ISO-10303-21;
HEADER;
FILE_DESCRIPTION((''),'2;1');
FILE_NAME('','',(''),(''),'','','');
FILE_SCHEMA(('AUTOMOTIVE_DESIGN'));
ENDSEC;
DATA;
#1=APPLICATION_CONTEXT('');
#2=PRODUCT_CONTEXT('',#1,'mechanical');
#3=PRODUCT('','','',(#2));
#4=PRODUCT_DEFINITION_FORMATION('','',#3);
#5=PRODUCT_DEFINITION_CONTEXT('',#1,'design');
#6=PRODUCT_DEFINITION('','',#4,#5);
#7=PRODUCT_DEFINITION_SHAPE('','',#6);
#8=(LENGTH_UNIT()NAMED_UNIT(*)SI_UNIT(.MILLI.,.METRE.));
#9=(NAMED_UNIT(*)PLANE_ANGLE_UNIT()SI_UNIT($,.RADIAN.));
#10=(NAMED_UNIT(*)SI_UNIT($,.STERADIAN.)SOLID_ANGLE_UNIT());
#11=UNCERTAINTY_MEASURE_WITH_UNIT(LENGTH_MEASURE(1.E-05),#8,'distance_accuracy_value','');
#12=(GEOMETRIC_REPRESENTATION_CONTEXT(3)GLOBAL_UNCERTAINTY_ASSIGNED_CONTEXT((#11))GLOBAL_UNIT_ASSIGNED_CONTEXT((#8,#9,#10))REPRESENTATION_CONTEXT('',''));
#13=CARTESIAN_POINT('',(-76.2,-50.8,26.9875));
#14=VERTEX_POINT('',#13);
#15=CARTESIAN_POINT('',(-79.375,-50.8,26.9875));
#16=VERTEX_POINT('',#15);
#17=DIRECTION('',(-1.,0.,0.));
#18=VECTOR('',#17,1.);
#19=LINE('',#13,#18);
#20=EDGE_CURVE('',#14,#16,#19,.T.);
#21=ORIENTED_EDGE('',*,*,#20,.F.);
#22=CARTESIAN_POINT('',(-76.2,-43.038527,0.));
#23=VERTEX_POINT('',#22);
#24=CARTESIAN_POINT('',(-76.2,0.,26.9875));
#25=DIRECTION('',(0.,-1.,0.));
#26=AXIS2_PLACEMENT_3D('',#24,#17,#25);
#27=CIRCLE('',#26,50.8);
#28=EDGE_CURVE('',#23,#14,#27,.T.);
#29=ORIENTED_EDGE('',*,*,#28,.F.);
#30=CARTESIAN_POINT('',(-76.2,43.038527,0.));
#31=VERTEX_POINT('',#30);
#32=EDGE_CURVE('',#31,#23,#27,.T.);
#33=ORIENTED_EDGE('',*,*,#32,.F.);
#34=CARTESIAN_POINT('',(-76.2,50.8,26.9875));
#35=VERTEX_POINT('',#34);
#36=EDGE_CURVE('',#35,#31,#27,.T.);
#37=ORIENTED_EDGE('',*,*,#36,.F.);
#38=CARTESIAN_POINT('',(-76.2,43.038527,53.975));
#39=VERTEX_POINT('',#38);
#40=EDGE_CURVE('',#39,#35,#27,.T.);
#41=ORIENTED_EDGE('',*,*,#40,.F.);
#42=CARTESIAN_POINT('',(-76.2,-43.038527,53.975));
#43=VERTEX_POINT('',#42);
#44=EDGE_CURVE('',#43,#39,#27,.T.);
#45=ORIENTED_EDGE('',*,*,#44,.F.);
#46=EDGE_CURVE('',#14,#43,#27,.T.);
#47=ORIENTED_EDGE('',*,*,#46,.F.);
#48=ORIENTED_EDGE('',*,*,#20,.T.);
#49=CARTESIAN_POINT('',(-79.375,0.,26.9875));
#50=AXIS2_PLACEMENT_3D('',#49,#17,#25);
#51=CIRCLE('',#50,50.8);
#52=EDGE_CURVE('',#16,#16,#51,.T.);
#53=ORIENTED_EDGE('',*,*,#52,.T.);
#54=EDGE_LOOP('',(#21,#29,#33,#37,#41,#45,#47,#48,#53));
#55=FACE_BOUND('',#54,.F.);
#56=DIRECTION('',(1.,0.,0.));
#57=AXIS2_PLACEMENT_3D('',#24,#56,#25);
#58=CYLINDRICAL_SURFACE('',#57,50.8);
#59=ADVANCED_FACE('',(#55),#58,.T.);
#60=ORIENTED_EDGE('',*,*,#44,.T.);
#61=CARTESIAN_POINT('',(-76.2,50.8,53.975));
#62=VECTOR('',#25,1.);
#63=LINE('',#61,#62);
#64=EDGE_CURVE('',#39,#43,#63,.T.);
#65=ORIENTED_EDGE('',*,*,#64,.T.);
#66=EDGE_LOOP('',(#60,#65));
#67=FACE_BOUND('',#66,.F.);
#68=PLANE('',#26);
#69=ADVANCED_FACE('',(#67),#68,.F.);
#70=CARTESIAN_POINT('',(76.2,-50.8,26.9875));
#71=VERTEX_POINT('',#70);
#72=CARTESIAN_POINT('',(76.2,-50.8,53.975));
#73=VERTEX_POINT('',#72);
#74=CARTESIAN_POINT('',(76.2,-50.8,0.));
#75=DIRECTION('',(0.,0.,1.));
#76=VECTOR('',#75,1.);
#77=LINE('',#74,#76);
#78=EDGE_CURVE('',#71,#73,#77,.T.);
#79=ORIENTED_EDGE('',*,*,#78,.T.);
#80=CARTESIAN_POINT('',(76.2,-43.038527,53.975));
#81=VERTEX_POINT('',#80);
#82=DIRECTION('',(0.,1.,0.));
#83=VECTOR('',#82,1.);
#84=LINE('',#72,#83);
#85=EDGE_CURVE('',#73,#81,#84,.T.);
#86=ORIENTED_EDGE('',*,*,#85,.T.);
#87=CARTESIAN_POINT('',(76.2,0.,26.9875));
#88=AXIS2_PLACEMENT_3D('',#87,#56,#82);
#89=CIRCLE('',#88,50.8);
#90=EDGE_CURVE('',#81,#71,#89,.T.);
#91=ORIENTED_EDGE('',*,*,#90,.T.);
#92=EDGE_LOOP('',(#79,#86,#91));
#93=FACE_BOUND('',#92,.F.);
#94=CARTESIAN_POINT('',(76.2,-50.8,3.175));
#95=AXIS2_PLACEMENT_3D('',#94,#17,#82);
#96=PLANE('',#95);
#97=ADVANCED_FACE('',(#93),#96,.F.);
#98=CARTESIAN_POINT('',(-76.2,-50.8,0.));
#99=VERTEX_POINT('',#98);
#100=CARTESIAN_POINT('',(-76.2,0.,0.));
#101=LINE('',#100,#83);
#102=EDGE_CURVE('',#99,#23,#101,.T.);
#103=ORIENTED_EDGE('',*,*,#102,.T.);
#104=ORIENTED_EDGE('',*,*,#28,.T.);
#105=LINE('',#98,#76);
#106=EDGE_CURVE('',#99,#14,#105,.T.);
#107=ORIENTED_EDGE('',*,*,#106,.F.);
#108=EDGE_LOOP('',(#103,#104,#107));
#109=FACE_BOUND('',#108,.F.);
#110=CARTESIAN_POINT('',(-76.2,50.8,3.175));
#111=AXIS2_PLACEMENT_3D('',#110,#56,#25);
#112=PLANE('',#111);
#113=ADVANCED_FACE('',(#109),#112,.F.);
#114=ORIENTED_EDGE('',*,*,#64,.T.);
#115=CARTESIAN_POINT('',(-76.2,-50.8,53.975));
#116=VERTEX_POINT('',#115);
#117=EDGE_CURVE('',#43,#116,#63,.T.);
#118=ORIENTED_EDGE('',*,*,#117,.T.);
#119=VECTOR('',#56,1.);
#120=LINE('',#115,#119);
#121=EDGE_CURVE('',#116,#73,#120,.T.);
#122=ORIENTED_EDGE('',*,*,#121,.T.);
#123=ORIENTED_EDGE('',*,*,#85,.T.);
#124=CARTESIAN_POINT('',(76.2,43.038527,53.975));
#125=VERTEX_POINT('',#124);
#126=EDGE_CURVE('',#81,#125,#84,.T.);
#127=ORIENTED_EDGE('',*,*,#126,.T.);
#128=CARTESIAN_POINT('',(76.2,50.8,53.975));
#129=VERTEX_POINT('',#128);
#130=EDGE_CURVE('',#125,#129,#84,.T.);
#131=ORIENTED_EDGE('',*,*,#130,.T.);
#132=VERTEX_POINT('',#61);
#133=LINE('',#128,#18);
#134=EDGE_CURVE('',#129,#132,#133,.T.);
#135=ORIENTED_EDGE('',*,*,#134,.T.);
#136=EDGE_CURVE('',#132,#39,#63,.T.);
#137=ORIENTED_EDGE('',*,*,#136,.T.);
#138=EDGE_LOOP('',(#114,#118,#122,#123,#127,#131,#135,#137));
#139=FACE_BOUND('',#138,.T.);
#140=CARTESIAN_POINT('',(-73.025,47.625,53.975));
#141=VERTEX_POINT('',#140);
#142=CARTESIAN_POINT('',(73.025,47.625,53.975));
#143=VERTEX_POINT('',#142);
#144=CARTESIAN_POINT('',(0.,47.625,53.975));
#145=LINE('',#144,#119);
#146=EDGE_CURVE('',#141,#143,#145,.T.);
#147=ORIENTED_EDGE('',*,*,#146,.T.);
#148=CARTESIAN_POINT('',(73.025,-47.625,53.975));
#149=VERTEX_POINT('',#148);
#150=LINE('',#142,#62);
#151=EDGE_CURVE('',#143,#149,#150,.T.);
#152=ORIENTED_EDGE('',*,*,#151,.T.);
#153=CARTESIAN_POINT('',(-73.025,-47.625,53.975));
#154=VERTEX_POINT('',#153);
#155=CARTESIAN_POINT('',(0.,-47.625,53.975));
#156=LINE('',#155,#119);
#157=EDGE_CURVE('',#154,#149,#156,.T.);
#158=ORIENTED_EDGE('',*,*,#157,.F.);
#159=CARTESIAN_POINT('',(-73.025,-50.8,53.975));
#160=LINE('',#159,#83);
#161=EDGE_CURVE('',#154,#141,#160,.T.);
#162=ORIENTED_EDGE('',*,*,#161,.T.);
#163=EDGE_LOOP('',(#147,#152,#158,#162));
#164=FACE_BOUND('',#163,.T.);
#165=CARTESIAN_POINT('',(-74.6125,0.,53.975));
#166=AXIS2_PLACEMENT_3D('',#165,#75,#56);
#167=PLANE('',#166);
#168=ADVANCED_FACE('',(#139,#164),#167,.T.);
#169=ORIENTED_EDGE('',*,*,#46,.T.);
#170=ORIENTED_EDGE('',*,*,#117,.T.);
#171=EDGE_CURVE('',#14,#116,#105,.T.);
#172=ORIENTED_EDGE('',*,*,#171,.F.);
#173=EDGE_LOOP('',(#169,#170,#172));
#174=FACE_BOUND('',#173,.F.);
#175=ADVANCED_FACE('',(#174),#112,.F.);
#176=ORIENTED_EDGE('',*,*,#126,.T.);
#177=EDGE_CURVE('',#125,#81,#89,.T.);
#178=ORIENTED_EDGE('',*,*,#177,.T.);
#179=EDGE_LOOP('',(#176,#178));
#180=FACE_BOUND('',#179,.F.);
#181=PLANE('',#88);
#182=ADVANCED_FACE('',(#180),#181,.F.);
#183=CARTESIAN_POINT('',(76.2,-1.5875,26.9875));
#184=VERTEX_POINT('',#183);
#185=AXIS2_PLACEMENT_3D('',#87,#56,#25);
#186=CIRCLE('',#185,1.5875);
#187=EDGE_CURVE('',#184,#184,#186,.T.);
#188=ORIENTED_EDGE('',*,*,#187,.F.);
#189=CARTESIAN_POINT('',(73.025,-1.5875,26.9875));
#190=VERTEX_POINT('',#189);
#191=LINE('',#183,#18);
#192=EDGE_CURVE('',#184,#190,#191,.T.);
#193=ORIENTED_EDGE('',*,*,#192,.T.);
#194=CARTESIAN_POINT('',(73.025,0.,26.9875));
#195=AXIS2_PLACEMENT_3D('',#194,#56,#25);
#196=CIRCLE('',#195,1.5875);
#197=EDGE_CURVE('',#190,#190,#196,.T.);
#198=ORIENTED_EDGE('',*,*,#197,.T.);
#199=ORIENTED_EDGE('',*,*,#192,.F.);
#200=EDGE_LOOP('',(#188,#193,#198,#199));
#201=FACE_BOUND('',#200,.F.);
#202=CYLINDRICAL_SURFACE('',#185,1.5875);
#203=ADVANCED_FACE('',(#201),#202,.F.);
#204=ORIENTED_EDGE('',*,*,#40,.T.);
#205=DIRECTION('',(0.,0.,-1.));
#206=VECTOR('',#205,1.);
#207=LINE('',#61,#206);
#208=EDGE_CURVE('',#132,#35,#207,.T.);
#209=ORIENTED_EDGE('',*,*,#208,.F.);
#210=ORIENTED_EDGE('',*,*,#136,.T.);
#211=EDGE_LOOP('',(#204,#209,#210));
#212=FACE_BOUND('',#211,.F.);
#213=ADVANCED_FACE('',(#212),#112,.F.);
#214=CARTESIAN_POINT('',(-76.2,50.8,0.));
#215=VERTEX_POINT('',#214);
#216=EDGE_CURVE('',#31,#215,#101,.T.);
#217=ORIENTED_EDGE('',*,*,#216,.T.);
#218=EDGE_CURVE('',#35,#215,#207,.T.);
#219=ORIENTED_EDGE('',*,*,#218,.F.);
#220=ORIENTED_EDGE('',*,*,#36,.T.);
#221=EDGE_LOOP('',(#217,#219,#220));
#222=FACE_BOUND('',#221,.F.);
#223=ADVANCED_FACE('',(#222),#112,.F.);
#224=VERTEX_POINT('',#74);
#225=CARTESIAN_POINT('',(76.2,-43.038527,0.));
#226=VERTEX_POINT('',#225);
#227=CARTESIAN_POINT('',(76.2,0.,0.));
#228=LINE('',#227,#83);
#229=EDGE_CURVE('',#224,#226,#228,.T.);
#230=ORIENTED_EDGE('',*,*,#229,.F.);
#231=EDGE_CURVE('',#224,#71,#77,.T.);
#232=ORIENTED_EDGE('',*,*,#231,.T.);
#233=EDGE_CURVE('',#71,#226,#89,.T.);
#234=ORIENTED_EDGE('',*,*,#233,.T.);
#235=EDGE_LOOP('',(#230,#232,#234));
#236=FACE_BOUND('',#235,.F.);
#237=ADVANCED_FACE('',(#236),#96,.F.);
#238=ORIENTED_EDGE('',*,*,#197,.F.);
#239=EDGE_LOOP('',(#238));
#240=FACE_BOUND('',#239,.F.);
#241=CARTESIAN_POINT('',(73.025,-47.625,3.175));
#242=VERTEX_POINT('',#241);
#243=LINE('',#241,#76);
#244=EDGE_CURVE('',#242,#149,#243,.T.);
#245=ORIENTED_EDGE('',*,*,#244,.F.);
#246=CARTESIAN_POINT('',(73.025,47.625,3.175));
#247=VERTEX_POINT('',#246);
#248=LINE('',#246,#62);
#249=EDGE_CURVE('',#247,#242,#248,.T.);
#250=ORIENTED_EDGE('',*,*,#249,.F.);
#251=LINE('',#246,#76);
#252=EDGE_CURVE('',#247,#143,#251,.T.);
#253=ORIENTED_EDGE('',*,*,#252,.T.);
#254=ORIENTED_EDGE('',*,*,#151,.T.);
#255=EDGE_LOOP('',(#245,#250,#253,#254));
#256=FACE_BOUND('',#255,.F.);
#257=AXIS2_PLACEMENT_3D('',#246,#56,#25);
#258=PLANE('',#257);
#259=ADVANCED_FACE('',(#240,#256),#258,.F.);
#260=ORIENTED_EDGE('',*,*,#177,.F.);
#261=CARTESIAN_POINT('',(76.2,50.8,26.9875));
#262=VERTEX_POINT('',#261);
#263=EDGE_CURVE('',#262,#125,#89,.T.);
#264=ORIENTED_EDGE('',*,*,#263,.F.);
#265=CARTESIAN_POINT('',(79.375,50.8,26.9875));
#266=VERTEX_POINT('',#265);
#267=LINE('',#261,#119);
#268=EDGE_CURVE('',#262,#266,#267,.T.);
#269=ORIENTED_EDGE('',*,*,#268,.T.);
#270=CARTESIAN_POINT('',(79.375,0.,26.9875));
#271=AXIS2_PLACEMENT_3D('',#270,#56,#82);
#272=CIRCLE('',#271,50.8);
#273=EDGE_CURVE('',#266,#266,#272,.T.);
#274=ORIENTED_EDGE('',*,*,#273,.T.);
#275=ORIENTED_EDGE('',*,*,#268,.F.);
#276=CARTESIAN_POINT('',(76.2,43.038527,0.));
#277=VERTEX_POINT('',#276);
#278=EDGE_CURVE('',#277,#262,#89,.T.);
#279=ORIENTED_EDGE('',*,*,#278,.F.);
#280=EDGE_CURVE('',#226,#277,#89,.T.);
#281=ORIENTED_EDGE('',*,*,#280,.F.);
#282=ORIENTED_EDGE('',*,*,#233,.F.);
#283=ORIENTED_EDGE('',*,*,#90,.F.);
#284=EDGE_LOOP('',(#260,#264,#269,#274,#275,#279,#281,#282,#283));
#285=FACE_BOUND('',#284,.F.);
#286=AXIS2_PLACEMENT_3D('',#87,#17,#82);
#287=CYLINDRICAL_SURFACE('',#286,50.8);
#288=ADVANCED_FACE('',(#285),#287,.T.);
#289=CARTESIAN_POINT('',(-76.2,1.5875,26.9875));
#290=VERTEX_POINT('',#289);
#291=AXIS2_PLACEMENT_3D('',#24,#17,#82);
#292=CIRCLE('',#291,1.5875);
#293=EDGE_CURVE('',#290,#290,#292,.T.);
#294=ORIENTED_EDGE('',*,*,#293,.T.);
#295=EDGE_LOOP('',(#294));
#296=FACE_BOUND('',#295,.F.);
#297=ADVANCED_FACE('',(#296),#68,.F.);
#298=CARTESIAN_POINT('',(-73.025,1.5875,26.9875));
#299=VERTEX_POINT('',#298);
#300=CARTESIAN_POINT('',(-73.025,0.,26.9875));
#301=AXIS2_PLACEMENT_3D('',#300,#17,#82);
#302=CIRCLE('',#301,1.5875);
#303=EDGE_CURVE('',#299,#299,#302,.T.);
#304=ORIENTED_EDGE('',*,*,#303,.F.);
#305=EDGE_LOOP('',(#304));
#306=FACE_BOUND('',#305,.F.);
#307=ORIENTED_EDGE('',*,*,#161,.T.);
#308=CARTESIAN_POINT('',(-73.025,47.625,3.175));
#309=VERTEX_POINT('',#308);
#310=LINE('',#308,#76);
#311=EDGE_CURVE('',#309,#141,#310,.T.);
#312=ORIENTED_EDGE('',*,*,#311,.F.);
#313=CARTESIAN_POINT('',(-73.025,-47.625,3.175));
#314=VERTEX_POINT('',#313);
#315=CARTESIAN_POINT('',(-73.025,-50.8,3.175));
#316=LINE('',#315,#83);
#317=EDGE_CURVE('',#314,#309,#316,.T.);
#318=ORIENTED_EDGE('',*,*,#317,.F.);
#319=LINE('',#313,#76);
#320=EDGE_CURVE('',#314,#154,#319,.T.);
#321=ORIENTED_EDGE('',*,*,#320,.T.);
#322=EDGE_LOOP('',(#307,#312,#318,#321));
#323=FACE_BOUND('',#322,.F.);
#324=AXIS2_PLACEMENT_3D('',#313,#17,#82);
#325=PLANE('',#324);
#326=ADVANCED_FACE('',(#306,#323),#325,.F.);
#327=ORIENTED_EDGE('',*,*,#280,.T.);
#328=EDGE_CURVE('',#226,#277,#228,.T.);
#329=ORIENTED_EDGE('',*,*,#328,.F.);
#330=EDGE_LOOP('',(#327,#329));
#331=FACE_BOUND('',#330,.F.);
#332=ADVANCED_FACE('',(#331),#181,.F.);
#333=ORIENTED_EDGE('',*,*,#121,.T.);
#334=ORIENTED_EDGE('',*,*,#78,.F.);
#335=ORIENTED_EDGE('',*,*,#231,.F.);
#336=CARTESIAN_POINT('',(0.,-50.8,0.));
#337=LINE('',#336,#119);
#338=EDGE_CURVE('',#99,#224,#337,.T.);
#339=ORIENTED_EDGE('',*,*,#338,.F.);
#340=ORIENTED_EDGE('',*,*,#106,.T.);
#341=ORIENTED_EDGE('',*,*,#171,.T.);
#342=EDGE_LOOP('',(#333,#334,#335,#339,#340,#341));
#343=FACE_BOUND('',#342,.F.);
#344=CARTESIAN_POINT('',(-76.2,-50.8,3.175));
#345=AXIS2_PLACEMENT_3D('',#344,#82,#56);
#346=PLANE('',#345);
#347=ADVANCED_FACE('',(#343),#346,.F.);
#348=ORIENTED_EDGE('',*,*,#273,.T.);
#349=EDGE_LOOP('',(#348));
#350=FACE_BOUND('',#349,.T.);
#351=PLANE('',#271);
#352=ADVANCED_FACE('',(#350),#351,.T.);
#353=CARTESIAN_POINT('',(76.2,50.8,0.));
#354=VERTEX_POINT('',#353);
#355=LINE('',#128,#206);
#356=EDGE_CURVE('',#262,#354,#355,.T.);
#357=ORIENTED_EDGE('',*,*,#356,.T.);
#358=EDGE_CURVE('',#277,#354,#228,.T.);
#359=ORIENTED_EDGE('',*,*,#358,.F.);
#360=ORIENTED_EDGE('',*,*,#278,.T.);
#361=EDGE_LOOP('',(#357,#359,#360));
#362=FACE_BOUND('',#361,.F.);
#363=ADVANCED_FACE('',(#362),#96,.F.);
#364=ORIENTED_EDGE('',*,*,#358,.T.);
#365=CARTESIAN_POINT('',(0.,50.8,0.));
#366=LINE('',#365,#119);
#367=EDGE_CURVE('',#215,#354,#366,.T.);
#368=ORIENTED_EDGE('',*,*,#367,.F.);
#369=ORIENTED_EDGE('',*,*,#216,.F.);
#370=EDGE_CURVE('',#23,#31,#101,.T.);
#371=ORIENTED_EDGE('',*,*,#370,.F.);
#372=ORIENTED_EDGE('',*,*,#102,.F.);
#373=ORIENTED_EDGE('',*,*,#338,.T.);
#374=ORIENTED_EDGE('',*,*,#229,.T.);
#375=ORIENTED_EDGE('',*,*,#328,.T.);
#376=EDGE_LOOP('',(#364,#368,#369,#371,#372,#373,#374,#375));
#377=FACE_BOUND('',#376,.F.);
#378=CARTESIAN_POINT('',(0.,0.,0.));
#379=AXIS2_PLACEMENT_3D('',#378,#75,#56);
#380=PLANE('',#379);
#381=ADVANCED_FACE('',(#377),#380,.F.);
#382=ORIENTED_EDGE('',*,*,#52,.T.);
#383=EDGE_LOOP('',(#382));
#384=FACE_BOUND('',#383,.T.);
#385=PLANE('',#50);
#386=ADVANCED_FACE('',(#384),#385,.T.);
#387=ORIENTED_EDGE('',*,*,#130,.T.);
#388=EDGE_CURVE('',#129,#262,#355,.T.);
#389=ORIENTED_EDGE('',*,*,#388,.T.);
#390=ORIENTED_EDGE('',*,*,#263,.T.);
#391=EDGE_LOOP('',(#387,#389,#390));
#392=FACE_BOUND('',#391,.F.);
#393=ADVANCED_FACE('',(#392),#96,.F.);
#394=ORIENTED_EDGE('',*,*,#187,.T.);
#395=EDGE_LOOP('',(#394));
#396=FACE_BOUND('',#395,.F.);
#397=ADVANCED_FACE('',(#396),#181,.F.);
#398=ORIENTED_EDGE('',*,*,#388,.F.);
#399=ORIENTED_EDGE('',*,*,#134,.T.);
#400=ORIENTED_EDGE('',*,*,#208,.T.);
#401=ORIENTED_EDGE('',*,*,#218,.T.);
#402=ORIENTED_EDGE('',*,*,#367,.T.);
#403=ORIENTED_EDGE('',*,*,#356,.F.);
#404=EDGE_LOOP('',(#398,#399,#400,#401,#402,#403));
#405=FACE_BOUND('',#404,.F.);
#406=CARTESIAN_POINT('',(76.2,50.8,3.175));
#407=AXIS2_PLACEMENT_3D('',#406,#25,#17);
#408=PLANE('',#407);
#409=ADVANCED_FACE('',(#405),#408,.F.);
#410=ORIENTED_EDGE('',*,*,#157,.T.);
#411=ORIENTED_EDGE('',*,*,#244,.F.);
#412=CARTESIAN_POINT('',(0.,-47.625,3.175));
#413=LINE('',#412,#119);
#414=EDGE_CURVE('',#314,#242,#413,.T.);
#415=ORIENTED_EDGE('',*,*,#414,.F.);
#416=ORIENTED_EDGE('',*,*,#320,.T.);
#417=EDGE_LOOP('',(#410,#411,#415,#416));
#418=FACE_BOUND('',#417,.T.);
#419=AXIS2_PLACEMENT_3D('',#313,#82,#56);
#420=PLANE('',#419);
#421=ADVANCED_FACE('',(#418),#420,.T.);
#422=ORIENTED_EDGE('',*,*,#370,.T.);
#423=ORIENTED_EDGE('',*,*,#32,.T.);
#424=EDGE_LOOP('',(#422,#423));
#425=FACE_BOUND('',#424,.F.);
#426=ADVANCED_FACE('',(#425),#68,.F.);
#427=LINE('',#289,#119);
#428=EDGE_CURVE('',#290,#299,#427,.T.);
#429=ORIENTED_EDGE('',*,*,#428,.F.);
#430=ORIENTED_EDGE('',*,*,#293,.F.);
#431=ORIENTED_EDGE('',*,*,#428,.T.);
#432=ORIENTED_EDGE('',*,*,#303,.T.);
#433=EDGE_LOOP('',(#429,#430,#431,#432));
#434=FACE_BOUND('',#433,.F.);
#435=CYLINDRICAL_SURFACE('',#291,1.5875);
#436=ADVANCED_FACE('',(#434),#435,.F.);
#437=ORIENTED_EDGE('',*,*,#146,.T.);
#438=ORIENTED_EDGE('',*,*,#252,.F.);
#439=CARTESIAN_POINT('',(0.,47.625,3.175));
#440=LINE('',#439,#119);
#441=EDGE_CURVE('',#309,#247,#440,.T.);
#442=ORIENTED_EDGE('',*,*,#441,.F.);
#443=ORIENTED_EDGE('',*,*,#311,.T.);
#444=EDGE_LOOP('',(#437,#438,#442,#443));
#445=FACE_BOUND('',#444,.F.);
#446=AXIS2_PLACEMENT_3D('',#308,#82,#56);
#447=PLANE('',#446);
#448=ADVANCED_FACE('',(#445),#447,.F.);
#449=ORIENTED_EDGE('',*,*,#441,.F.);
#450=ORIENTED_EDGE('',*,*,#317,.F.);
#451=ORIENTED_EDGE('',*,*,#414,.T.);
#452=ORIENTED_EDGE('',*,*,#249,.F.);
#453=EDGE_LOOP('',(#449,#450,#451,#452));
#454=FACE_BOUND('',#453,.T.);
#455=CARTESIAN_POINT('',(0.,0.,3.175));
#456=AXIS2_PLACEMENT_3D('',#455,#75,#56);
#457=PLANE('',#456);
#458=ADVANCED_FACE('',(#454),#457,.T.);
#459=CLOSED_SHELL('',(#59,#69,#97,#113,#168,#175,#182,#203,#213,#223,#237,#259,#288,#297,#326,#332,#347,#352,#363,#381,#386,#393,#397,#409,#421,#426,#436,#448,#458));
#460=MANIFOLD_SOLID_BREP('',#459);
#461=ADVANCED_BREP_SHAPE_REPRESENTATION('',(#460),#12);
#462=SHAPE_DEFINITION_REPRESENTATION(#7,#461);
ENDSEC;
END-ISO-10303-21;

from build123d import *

# Parameters (mm, degrees)
F0_W      = 152.4
F0_H      = 101.6
F1_DEPTH  = 3.175
F2_W      = 146.05
F2_H      = 3.175
F3_DEPTH  = 50.8
F5_DEPTH  = 25.4
F7_DEPTH  = 3.175
F8_DEPTH  = 25.4
F9_R      = 50.8
F10_DEPTH = 3.175
F11_R     = 50.8
F12_DEPTH = 3.175


# Not quite as in the source:
# - a length typed as a fraction of an inch, garbled in the dataset ("3 / 203.2 mm" for 3/8 in), is restored


with BuildPart() as f1:
    # F0 (on Top) → F1 (new body)
    with BuildSketch(Plane.XY):
        Rectangle(F0_W, F0_H)
    extrude(amount=F1_DEPTH)

    # F2 (on face) → F3 (join)
    with BuildSketch(Plane.XY.offset(3.175)):
        Polygon((-73.025, 50.8), (-76.2, 50.8), (-76.2, -50.8), (-73.025, -50.8), (-73.025, -47.625), (-73.025, 47.625), align=None)
        with Locations((0, 49.2125)):
            Rectangle(F2_W, F2_H)
        Polygon((76.2, 50.8), (73.025, 50.8), (73.025, 47.625), (73.025, -47.625), (73.025, -50.8), (76.2, -50.8), align=None)
        with Locations((0, -49.2125)):
            Rectangle(F2_W, F2_H)
    extrude(amount=F3_DEPTH)

    # F4 (on face) → F5 (cut)
    with BuildSketch(Plane.YZ.offset(76.2)):
        with BuildLine():
            ThreePointArc((1.5875, 26.9875), (0, 28.575), (-1.5875, 26.9875))
            Line((-1.5875, 26.9875), (1.5875, 26.9875))
        make_face()
        with BuildLine():
            Line((1.5875, 26.9875), (-1.5875, 26.9875))
            ThreePointArc((-1.5875, 26.9875), (0, 25.4), (1.5875, 26.9875))
        make_face()
    extrude(amount=-F5_DEPTH, mode=Mode.SUBTRACT)

    # F6 (on face) → F7 (cut)
    with BuildSketch(Plane(origin=(-76.2, 0, 0), x_dir=(0, -1, 0), z_dir=(-1, 0, 0))):
        with BuildLine():
            Line((-1.5875, 26.9875), (1.5875, 26.9875))
            ThreePointArc((1.5875, 26.9875), (0, 28.575), (-1.5875, 26.9875))
        make_face()
        with BuildLine():
            ThreePointArc((-1.5875, 26.9875), (0, 25.4), (1.5875, 26.9875))
            Line((1.5875, 26.9875), (-1.5875, 26.9875))
        make_face()
    extrude(amount=F7_DEPTH, mode=Mode.SUBTRACT)

    # F6 (on face) → F8 (cut)
    with BuildSketch(Plane(origin=(-76.2, 0, 0), x_dir=(0, -1, 0), z_dir=(-1, 0, 0))):
        with BuildLine():
            Line((-1.5875, 26.9875), (1.5875, 26.9875))
            ThreePointArc((1.5875, 26.9875), (0, 28.575), (-1.5875, 26.9875))
        make_face()
        with BuildLine():
            ThreePointArc((-1.5875, 26.9875), (0, 25.4), (1.5875, 26.9875))
            Line((1.5875, 26.9875), (-1.5875, 26.9875))
        make_face()
    extrude(amount=-F8_DEPTH, mode=Mode.SUBTRACT)

    # F9 (on face) → F10 (join)
    with BuildSketch(Plane.YZ.offset(76.2)):
        with Locations((0, 26.9875)):
            Circle(F9_R)
    extrude(amount=F10_DEPTH)

    # F11 (on face) → F12 (join)
    with BuildSketch(Plane(origin=(-76.2, 0, 0), x_dir=(0, -1, 0), z_dir=(-1, 0, 0))):
        with Locations((0, 26.9875)):
            Circle(F11_R)
    extrude(amount=F12_DEPTH)


solid = f1.part
